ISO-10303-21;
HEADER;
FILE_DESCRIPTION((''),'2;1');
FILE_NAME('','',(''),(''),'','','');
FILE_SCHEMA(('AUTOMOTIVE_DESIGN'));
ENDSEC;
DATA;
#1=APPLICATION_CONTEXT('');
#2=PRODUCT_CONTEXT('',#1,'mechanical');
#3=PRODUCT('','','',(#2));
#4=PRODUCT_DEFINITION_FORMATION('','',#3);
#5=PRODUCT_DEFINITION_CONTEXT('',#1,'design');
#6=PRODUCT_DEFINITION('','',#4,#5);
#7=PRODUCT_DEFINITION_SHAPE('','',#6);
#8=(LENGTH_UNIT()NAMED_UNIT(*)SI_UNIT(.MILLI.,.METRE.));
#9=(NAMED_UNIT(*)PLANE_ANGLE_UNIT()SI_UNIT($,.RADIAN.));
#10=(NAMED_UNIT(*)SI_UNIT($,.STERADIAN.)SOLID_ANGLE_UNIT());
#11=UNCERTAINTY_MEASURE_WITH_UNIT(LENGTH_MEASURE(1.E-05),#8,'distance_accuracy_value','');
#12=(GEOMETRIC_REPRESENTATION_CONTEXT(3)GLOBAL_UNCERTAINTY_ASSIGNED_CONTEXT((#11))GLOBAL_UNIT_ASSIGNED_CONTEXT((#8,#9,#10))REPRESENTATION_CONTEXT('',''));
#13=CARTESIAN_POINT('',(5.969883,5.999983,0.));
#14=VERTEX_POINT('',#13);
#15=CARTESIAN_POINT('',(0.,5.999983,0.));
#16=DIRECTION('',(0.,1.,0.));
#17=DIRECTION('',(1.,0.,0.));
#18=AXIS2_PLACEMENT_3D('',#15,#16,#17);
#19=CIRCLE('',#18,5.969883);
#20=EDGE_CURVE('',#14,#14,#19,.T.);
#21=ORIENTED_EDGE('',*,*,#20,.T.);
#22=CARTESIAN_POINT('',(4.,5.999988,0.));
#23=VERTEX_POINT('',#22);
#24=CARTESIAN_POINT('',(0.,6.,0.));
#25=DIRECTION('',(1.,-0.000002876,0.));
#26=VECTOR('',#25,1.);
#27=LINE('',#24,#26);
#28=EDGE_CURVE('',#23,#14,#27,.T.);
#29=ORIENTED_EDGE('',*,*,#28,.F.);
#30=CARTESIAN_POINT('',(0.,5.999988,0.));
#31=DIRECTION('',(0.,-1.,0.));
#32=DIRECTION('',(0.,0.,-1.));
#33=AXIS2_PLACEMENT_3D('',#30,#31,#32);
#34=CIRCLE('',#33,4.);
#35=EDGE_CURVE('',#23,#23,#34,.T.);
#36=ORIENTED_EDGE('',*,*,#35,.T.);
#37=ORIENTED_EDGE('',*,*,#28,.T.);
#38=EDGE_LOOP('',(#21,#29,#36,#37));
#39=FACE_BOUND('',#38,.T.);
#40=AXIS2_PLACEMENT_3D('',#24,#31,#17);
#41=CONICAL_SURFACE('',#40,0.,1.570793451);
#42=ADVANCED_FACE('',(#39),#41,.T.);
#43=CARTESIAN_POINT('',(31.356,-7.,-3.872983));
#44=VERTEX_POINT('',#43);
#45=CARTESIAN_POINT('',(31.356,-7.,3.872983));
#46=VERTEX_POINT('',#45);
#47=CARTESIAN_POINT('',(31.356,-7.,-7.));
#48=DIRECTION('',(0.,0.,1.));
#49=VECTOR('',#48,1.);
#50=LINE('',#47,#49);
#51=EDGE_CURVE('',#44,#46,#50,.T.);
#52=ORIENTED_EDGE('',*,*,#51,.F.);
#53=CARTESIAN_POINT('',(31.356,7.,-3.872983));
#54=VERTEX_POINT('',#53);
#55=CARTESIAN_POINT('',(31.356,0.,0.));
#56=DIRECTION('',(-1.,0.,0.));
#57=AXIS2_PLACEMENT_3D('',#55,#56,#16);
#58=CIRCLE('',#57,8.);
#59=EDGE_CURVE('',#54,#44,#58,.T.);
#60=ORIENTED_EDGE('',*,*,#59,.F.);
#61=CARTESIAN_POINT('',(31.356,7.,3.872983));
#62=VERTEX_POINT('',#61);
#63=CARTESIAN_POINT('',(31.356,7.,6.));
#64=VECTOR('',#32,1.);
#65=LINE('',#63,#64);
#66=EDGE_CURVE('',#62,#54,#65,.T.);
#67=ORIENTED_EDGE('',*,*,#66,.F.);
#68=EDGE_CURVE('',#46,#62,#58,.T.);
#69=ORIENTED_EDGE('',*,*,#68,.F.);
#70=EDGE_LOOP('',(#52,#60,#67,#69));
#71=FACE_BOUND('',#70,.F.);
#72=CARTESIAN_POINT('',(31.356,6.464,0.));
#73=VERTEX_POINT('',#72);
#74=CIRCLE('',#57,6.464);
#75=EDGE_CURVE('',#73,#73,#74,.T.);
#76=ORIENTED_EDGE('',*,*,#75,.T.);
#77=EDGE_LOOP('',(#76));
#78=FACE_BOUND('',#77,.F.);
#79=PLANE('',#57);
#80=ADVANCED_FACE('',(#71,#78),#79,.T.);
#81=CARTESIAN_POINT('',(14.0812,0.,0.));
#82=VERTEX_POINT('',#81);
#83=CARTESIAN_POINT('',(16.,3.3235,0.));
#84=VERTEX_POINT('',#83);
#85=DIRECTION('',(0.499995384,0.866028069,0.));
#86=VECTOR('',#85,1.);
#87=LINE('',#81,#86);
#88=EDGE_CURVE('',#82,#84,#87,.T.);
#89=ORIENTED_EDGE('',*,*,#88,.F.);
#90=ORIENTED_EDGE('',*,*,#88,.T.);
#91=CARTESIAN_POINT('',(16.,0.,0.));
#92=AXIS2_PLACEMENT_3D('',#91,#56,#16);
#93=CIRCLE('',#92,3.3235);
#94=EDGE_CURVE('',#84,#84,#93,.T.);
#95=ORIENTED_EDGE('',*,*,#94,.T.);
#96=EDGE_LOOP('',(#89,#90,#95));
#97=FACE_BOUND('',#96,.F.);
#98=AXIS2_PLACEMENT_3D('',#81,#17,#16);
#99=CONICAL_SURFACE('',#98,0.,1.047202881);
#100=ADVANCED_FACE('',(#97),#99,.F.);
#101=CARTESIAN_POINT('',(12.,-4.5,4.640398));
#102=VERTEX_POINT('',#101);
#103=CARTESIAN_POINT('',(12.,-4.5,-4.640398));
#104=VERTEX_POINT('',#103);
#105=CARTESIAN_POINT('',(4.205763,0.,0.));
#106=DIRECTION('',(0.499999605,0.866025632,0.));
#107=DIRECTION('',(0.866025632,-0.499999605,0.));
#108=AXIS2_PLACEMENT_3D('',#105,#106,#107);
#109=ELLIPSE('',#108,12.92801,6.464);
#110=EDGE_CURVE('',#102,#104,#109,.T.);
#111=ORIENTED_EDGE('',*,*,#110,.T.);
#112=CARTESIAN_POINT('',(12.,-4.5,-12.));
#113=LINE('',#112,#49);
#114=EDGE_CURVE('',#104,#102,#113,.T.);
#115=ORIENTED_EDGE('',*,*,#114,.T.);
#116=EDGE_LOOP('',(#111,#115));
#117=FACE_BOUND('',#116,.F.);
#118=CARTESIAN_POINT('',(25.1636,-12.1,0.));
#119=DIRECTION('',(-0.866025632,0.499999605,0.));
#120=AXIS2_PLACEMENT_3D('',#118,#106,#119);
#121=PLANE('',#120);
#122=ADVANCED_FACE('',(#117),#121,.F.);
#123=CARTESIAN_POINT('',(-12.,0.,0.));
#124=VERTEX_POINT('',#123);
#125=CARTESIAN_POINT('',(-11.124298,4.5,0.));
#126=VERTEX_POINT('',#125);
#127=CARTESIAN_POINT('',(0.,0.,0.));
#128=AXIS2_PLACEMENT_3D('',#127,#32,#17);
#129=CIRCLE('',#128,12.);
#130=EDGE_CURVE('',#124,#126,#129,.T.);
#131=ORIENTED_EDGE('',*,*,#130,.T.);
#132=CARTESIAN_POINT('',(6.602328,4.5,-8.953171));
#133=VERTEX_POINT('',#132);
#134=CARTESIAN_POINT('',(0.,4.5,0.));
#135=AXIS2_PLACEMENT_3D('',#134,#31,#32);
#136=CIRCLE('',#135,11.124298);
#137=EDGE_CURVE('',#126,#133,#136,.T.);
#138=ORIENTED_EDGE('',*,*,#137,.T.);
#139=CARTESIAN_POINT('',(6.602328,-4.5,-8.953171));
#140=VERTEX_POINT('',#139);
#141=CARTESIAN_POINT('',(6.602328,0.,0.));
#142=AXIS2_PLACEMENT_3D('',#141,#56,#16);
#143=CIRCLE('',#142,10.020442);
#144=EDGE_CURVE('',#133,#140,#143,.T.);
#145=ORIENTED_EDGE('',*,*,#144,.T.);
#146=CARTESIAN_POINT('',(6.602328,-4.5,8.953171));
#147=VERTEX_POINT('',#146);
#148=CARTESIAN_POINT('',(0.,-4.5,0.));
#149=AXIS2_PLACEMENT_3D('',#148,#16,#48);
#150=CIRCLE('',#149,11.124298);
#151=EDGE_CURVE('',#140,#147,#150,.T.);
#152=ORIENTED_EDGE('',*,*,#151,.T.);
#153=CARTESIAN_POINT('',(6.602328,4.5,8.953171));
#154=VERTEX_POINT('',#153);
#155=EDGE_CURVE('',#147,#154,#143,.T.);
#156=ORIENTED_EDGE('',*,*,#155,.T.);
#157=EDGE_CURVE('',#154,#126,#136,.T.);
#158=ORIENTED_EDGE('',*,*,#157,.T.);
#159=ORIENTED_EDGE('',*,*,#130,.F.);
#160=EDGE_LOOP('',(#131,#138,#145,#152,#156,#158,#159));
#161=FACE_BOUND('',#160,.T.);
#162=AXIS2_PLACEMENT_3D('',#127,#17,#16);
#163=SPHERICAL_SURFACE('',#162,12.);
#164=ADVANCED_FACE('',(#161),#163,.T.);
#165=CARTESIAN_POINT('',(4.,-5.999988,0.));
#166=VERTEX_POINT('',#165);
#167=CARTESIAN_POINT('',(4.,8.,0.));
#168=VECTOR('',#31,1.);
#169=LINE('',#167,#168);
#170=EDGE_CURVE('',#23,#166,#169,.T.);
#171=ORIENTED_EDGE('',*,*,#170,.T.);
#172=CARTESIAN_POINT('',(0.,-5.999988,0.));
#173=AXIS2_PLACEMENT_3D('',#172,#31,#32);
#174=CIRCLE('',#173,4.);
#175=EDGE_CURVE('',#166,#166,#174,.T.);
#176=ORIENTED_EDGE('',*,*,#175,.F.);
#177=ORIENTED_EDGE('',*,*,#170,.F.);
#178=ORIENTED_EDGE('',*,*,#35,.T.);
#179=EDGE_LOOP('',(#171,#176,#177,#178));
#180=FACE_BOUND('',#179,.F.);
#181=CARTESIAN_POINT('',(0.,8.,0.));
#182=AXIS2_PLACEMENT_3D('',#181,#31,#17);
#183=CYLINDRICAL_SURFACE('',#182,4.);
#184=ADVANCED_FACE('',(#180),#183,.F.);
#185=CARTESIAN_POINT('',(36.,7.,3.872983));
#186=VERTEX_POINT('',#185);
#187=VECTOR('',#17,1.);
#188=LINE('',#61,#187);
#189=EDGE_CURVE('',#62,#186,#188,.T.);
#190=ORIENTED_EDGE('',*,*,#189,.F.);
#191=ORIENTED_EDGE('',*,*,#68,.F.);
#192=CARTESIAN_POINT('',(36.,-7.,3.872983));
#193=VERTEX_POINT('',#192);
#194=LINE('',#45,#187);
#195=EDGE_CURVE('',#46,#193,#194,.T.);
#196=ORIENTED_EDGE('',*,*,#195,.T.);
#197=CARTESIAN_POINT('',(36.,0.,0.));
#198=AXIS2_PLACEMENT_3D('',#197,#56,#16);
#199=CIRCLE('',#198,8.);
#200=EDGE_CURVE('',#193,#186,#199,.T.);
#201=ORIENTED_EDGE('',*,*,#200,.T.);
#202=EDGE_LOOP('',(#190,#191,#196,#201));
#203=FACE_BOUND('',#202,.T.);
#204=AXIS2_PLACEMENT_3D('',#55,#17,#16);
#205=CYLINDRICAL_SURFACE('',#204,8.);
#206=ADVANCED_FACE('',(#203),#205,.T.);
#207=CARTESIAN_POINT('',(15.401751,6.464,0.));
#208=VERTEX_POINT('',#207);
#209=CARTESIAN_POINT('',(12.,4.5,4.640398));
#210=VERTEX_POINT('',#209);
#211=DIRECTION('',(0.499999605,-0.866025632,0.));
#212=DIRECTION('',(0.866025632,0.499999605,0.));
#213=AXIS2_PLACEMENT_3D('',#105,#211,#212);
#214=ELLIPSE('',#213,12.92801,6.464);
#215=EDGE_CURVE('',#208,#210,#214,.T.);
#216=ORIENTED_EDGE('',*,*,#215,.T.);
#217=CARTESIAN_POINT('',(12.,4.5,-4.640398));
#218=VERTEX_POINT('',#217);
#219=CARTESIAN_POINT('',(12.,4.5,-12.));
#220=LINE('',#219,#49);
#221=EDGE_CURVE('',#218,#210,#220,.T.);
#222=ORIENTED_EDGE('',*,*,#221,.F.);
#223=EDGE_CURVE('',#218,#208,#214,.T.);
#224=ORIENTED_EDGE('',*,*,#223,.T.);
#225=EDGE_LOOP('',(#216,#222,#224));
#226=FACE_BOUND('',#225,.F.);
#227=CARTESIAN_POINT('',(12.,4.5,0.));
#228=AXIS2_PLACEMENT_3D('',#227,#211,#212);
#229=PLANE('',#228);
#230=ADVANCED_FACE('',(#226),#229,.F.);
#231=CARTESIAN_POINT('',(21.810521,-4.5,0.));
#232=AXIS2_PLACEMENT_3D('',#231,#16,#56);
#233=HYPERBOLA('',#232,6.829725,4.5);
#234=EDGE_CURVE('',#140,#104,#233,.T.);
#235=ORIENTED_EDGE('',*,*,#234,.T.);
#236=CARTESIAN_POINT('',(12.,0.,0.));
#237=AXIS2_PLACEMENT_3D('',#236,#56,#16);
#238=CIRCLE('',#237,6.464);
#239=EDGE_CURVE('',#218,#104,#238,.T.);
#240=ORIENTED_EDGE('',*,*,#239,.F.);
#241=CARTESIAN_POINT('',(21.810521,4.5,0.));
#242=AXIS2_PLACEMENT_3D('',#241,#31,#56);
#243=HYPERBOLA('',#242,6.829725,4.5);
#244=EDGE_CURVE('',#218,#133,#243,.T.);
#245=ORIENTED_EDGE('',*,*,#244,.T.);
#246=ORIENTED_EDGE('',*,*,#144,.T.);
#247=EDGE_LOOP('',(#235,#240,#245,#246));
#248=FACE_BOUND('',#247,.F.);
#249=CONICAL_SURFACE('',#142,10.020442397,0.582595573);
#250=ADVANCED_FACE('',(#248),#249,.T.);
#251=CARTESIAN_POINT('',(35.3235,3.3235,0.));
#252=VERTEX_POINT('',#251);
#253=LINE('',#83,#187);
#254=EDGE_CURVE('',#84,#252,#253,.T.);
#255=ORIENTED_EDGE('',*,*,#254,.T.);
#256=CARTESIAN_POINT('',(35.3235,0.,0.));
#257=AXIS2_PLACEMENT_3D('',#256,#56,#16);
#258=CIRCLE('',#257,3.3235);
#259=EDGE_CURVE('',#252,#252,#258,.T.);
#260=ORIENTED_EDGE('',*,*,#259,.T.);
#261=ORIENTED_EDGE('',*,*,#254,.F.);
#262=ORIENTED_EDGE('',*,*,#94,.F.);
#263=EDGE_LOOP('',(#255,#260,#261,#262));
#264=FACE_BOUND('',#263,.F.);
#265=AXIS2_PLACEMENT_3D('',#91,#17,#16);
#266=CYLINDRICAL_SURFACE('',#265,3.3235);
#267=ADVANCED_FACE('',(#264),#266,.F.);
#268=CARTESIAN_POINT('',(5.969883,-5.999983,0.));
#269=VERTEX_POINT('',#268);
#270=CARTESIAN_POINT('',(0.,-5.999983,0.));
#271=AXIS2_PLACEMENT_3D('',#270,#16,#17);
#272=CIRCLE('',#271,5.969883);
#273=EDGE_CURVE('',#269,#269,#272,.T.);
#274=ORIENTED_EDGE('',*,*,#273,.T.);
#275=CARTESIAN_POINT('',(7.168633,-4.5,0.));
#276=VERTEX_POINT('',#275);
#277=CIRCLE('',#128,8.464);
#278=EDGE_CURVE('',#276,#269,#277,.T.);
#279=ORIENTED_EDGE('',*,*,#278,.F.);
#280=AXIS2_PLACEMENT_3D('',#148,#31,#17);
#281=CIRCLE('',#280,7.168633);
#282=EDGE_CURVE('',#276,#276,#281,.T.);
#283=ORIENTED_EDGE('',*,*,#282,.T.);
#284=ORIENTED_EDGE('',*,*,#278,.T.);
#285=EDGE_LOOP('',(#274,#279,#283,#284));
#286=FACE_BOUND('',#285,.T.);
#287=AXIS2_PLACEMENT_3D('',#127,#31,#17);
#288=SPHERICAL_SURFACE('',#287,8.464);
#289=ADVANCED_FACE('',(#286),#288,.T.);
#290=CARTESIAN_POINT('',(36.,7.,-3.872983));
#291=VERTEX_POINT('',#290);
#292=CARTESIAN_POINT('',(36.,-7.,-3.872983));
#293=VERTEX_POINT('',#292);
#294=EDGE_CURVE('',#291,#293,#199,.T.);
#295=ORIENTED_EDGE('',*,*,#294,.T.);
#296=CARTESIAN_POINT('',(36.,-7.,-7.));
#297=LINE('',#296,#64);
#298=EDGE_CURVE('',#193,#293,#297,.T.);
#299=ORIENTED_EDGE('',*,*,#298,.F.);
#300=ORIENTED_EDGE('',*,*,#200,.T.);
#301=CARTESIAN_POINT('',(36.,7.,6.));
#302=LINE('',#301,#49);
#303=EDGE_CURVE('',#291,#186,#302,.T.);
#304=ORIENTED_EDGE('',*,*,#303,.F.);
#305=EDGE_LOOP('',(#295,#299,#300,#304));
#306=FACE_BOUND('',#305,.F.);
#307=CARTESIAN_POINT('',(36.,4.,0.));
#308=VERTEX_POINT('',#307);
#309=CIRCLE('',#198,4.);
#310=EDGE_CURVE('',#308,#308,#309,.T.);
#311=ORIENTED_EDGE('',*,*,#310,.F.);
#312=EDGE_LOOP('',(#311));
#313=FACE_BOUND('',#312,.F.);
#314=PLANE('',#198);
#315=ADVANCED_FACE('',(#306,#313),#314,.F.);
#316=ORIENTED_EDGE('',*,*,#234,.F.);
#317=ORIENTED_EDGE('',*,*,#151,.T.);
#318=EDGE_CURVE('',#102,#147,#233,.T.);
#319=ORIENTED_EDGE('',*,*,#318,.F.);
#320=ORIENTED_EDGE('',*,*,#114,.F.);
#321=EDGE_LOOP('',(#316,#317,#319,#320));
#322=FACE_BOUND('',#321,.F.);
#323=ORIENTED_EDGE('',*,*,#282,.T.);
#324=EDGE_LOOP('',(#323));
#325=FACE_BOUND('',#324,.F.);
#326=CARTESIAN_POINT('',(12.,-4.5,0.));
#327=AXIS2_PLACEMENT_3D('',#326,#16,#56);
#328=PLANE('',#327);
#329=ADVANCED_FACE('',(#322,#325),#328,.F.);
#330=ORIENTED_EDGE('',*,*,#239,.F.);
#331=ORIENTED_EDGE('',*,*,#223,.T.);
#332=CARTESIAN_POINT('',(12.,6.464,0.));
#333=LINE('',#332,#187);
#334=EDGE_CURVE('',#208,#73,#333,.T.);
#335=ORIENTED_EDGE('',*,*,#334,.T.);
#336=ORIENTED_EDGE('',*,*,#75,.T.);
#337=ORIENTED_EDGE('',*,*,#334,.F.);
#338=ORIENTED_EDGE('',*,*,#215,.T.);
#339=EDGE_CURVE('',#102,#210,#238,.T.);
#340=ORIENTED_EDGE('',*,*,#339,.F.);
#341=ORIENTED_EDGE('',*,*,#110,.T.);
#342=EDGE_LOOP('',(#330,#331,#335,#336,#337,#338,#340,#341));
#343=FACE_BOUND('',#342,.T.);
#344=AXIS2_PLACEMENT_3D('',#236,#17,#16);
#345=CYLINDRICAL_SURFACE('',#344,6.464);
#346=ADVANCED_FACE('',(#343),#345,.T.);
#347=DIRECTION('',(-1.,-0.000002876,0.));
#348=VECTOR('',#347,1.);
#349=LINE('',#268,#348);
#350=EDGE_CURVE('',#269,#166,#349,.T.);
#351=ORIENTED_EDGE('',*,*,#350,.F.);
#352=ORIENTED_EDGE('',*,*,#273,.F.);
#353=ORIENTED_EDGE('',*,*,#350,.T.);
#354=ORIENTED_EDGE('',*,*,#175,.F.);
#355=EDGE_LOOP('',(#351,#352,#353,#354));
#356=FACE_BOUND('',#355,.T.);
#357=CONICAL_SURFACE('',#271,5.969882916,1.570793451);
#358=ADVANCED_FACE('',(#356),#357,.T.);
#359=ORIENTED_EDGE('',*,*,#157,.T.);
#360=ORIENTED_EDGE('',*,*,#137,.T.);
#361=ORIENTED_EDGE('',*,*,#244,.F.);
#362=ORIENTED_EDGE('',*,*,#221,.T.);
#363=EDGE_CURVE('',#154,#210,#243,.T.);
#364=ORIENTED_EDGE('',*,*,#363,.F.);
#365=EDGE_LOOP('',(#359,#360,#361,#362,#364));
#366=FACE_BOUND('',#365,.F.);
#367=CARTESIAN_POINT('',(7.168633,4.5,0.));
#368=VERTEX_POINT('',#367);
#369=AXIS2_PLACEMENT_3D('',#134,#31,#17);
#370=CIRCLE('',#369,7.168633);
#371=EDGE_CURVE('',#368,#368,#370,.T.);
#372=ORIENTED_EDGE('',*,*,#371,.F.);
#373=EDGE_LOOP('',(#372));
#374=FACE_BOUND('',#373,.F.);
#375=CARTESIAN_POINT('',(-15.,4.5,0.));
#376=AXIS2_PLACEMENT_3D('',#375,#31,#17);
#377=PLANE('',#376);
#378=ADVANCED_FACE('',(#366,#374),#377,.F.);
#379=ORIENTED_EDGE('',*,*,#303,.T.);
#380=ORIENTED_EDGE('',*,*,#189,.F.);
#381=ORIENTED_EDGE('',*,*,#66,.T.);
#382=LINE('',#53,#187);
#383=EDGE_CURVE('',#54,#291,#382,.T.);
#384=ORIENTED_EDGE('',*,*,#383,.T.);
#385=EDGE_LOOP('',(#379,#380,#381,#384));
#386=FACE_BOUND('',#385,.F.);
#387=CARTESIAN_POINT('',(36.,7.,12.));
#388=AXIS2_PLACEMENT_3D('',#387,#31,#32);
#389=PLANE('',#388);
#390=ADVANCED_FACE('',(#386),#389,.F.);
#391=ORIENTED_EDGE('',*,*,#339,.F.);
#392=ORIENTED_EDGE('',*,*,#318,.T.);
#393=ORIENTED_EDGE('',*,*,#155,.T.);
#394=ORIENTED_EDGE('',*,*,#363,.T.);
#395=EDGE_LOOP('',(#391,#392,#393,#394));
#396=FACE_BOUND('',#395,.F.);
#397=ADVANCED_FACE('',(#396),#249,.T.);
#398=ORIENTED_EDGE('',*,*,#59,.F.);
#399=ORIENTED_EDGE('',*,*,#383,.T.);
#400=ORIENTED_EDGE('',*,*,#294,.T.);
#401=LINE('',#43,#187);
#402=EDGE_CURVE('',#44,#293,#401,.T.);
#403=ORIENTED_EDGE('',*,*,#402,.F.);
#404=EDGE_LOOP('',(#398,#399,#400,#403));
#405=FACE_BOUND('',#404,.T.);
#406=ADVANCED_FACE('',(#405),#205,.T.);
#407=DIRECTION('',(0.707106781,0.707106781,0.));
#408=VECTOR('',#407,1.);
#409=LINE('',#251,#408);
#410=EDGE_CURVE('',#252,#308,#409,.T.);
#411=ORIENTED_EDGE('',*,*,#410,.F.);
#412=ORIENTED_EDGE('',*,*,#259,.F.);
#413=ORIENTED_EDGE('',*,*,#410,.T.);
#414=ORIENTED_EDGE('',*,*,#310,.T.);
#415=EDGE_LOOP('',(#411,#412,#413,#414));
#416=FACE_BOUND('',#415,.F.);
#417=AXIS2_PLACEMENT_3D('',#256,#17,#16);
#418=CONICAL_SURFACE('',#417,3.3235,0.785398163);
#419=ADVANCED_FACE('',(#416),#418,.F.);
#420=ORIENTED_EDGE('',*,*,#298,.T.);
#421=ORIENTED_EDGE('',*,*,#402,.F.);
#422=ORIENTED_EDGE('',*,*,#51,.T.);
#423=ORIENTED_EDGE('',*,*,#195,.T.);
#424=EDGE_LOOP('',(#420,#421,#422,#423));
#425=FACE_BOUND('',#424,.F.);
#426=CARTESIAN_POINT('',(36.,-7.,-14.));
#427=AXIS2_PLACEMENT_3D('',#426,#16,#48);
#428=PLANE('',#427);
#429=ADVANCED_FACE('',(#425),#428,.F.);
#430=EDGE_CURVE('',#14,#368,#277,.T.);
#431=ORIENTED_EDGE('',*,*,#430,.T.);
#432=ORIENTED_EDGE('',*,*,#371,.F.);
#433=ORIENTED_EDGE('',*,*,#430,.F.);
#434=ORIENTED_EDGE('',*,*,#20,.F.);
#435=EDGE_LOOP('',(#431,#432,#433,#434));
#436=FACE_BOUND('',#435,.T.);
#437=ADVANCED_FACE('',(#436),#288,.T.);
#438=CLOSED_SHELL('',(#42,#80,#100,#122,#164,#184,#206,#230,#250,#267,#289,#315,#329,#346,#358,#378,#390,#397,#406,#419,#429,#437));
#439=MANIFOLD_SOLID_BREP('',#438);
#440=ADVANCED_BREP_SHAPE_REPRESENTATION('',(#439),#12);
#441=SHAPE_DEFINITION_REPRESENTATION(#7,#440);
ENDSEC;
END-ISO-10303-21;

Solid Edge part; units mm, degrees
sketch "Sketch1" plane through (0, 0, 0) normal (0, 0, 1) x (1, 0, 0)
  arc A0 (-12, 0) -> (6.6023, 10.0204) centre (0, 0) cw
  line L0 (6.6023, 10.0204) -> (12, 6.464)
  line L1 (12, 6.464) -> (31.356, 6.464)
  line L2 (31.356, 6.464) -> (31.356, 8)
  line L3 (31.356, 8) -> (36, 8)
  line L4 (36, 8) -> (36, 0)
  line L5 (36, 0) -> (-12, 0)
revolve "RevolvedProtrusion1" add sketch "Sketch1" angle 360 about axis through (36, 0, 0) along (-1, 0, 0)
sketch "Sketch2" plane through (0, 0, 0) normal (0, 0, 1) x (1, 0, 0)
  line L0 (-16, -12.1) -> (25.1636, -12.1)
  line L1 (25.1636, -12.1) -> (12, -4.5)
  line L2 (12, -4.5) -> (-15, -4.5)
  line L3 (-15, -4.5) -> (-15, 4.5)
  line L4 (-15, 4.5) -> (12, 4.5)
  line L5 (12, 4.5) -> (25.1636, 12.1)
  line L6 (25.1636, 12.1) -> (-16, 12.1)
  line L7 (-16, 12.1) -> (-16, -12.1)
extrude "ExtrudedCutout_1" cut sketch "Sketch2" against normal blind 12 and the other way blind 12
sketch "Sketch3" plane through (36, 0, 0) normal (1, 0, 0) x (0, 1, 0)
  line L0 (-14, -14) -> (-7, -14)
  line L1 (-7, -14) -> (-7, 12)
  line L2 (-7, 12) -> (7, 12)
  line L3 (7, 12) -> (7, -14)
  line L4 (7, -14) -> (14, -14)
  line L5 (14, -14) -> (14, 14)
  line L6 (14, 14) -> (-14, 14)
  line L7 (-14, 14) -> (-14, -14)
extrude "ExtrudedCutout_2" cut sketch "Sketch3" against normal blind 16 and the other way blind 16
sketch "Sketch4" plane through (0, 0, 0) normal (0, 0, 1) x (1, 0, 0)
  line L0 (14.0812, 0) -> (16, 3.3235)
  line L1 (16, 3.3235) -> (35.3235, 3.3235)
  line L2 (35.3235, 3.3235) -> (36, 4)
  line L3 (36, 4) -> (36, 0)
  line L4 (36, 0) -> (14.0812, 0)
revolve "RevolvedCutout1" cut sketch "Sketch4" angle 360 about axis through (36, 0, 0) along (-1, 0, 0)
cosmetic_thread "Thread_1" size "M8" thread depth 14.323
sketch "Sketch5" plane through (0, 0, 0) normal (0, 0, 1) x (1, 0, 0)
  line L0 (0, 6) -> (5.9699, 6)
  arc A0 (5.9699, 6) -> (5.9699, -6) centre (0, 0) cw
  line L1 (5.9699, -6) -> (0, -6)
  line L2 (0, -6) -> (0, 6)
revolve "RevolvedProtrusion2" add sketch "Sketch5" angle 360 about axis through (0, -6, 0) along (0, 1, 0)
sketch "Sketch6" plane through (0, 0, 0) normal (0, 0, 1) x (1, 0, 0)
  line L0 (0, 8) -> (4, 8)
  line L1 (4, 8) -> (4, -8)
  line L2 (4, -8) -> (0, -8)
  line L3 (0, -8) -> (0, 8)
revolve "RevolvedCutout2" cut sketch "Sketch6" angle 360 about axis through (0, -8, 0) along (0, 1, 0)
properties part number "195581 CRSGS-M8---(K_0)"
